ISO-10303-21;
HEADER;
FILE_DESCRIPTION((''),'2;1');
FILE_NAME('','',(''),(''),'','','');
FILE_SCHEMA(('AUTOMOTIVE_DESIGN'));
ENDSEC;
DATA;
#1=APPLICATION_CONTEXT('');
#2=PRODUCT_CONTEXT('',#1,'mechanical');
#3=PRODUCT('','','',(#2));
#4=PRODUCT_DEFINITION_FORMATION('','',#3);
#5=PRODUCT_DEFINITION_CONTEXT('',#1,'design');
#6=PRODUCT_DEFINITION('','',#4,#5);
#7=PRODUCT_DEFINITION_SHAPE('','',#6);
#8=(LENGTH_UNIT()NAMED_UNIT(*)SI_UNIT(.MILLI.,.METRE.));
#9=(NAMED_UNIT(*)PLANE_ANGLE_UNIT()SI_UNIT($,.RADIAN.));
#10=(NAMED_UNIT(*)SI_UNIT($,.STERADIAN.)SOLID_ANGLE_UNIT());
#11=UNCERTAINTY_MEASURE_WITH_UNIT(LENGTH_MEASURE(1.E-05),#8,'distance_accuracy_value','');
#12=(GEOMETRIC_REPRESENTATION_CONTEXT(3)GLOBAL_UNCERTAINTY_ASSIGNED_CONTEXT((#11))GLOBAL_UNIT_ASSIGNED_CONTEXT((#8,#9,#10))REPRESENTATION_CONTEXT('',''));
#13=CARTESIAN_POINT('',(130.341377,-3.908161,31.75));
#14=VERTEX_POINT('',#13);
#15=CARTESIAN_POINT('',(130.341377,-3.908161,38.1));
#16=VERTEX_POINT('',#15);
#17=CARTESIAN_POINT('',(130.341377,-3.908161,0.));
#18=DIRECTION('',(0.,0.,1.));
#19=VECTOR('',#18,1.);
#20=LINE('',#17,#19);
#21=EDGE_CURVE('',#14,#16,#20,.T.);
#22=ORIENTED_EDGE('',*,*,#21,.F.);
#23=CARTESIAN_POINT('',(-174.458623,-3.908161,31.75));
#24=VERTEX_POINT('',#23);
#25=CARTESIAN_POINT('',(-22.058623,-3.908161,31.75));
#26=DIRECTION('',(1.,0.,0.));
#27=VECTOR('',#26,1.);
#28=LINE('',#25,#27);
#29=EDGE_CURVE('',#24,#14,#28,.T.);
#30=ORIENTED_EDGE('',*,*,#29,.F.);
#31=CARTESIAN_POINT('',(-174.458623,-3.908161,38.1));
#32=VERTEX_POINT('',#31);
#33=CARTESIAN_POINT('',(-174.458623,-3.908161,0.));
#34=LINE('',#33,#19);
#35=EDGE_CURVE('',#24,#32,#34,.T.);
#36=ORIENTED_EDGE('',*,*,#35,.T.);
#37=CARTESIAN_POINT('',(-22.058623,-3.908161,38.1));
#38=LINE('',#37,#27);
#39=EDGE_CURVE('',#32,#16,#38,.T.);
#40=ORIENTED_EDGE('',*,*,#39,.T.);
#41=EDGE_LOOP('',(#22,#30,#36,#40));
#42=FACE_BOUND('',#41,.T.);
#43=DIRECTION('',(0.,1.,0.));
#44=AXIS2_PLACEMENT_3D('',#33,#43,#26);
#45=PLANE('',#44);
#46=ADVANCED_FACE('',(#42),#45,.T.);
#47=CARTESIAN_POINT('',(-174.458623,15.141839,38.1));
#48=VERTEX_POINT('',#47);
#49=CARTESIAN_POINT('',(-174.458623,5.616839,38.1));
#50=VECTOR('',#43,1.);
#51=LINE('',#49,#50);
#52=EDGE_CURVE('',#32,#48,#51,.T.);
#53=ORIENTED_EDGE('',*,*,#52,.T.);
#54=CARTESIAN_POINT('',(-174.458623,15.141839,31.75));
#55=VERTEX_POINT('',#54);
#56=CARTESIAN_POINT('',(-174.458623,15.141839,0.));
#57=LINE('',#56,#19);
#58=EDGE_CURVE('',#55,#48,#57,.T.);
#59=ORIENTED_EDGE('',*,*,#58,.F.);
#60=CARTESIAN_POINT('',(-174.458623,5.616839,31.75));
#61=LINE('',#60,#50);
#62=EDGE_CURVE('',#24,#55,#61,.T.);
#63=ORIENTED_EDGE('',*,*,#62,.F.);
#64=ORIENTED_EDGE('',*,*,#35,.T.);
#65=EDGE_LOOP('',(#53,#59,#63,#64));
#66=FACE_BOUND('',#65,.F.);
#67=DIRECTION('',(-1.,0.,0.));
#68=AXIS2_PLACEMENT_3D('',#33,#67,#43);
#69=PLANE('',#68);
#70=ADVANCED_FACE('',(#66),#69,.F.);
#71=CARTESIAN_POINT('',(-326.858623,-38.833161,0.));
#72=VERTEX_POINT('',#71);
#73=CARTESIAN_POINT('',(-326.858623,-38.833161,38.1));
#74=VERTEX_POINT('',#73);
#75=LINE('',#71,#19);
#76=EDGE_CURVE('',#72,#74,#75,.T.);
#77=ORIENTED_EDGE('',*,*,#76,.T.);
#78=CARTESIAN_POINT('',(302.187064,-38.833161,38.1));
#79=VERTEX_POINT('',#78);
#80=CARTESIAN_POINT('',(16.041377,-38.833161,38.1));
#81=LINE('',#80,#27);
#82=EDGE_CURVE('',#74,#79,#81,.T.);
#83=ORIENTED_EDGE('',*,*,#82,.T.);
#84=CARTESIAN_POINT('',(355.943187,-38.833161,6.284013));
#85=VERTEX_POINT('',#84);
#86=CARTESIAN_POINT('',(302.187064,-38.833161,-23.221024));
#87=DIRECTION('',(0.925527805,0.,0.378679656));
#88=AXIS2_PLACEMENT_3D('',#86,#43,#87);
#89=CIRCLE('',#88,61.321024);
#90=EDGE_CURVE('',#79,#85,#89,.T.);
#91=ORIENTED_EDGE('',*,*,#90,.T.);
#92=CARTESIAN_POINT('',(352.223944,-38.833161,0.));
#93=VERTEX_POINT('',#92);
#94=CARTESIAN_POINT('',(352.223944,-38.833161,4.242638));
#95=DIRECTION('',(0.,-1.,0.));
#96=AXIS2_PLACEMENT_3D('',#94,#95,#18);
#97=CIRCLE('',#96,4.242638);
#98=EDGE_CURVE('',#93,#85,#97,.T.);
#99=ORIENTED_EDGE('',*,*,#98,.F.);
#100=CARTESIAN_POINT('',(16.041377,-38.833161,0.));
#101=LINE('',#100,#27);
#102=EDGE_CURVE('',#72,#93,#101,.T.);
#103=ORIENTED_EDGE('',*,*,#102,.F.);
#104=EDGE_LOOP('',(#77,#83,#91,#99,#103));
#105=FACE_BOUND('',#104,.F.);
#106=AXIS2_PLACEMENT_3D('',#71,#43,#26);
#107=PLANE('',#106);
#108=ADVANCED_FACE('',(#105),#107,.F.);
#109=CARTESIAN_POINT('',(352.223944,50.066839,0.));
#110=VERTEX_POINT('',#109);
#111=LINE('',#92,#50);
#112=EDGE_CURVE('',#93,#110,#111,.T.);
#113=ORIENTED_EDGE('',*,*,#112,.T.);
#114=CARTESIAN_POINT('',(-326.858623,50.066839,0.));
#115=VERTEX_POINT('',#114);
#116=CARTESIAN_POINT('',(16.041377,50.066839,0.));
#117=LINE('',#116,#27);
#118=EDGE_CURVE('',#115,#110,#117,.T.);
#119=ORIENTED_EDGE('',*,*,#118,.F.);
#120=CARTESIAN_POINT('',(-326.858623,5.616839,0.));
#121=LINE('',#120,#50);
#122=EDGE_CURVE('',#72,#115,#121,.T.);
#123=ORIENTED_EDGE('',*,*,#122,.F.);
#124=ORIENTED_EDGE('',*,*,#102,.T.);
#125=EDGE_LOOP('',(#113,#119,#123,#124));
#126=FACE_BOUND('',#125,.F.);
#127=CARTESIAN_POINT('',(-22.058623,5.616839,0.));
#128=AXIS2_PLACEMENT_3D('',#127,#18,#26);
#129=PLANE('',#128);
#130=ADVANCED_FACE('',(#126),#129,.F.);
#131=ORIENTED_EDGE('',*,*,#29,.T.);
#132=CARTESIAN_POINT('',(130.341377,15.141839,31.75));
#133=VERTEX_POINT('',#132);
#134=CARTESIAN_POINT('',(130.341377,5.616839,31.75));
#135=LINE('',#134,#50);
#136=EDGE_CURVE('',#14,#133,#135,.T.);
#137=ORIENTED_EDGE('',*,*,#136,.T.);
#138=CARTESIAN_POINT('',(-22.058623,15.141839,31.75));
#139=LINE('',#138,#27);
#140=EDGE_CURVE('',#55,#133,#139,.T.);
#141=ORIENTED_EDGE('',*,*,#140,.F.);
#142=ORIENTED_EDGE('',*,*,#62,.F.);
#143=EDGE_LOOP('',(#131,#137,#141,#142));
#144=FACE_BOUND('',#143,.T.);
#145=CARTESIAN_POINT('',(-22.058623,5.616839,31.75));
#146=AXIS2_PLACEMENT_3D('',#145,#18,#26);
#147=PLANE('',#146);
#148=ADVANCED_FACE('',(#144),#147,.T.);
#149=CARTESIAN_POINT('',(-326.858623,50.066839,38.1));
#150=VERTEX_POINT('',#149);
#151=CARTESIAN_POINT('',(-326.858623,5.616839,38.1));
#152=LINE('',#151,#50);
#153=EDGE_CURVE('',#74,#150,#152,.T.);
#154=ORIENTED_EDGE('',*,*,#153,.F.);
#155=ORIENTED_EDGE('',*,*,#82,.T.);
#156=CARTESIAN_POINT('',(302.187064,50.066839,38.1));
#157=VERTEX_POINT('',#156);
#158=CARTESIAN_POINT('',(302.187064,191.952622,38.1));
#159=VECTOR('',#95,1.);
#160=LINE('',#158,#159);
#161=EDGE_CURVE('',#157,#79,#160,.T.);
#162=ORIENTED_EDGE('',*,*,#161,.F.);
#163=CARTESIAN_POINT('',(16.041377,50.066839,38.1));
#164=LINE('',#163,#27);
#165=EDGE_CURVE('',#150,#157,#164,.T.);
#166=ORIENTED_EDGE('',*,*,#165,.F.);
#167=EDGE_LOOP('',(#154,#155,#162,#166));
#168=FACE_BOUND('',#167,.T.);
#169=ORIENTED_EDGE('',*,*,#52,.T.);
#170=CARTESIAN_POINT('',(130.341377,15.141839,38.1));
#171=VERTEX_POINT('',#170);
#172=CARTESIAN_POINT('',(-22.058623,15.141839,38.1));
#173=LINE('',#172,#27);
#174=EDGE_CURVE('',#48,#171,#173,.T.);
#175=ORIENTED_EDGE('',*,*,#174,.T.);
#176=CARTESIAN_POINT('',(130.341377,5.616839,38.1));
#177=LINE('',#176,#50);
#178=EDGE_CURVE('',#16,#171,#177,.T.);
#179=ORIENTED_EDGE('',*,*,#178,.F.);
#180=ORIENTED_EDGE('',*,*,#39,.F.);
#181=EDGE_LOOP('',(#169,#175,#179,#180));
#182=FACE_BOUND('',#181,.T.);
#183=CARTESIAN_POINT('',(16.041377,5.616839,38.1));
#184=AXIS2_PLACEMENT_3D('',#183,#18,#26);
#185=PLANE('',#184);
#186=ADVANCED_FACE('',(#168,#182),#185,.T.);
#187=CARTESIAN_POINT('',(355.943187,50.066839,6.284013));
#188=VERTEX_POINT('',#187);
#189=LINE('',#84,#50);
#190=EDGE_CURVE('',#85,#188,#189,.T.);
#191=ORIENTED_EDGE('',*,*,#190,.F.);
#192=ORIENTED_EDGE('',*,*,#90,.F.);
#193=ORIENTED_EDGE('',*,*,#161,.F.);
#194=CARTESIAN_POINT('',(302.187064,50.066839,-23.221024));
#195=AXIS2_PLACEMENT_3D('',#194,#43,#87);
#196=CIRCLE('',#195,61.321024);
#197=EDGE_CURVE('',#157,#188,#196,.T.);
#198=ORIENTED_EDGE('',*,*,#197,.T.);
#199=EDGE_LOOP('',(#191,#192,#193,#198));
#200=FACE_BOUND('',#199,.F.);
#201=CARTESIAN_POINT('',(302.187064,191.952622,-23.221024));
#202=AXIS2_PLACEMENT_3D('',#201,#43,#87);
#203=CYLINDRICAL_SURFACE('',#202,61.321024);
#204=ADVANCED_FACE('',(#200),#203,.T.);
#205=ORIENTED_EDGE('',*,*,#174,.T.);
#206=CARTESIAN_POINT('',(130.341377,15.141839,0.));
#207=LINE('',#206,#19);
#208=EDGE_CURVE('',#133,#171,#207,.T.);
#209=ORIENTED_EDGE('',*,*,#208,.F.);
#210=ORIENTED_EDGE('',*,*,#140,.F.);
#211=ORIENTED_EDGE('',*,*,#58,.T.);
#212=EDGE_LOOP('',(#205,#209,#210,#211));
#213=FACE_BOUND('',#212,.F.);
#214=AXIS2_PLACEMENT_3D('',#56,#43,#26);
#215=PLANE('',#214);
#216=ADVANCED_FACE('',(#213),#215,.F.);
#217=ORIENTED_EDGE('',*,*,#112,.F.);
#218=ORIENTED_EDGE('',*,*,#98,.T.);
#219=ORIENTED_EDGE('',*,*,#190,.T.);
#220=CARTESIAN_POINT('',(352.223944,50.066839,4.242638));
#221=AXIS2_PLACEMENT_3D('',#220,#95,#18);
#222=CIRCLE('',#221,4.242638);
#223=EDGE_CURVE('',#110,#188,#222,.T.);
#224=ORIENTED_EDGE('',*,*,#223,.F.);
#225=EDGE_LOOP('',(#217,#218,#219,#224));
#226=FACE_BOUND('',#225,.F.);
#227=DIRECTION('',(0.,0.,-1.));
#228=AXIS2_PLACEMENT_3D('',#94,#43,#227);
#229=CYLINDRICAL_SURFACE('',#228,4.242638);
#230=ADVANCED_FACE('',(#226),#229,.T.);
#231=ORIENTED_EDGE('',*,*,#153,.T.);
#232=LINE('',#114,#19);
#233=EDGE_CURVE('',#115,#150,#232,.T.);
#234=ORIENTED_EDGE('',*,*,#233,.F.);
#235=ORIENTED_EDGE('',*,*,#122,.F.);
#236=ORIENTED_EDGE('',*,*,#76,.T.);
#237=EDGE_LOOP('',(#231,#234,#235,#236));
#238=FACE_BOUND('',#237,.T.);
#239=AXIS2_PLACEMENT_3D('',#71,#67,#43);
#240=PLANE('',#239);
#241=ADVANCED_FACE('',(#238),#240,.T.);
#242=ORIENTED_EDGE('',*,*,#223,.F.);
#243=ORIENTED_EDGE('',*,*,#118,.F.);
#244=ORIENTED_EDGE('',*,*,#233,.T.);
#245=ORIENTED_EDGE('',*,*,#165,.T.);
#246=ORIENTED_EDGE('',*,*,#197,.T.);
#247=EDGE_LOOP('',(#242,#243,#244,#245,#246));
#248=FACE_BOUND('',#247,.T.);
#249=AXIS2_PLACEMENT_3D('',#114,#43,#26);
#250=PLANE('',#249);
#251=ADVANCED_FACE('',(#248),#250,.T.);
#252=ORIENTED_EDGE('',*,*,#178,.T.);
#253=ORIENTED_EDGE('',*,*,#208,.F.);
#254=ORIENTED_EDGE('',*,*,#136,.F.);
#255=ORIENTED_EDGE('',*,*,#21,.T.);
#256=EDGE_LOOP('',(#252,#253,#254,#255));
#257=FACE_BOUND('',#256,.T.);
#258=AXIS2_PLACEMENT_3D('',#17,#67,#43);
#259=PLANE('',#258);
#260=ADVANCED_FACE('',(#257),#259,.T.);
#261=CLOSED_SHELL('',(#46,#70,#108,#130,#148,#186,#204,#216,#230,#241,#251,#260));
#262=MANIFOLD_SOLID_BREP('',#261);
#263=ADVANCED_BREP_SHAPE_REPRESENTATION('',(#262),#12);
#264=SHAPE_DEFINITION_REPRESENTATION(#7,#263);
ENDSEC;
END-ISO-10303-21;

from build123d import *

# Parameters (mm, degrees)
F0_W        = 685.8
F0_H        = 88.9
F0_W_2      = 304.8
F0_H_2      = 19.05
F1_DEPTH    = 38.1
F2_T1_DEPTH = 372.6715659515
F3_R        = 4.2426380505
F4_DEPTH    = 31.75


# Not quite as in the source:
# - a fillet or chamfer that OpenCascade refuses, or shapes differently, is made with other operations: its cross-section is extruded or revolved along the edge and cut away or added


with BuildPart() as f1:
    # F0 (on Top) → F1 (new body)
    with BuildSketch(Plane.XY):
        with Locations((16.0413767457, 5.6168386396)):
            Rectangle(F0_W, F0_H)
        with Locations((-22.0586232543, 5.6168386396)):
            Rectangle(F0_W_2, F0_H_2, mode=Mode.SUBTRACT)
    extrude(amount=F1_DEPTH)

    # F2: fillet of radius 61.3210244843 on 1 edges, made by hand

    # F2_s2 → F2_t1 (cut)
    with BuildSketch(Plane.XZ.offset(-191.9526216153)):
        with BuildLine():
            ThreePointArc((358.9413767457, 0), (336.3654999799, 27.6916706651), (302.1870635554, 38.1))
            Line((302.1870635554, 38.1), (358.9413767457, 38.1))
            Line((358.9413767457, 38.1), (358.9413767457, 0))
        make_face()
    extrude(amount=F2_T1_DEPTH, mode=Mode.SUBTRACT)

    # F3
    f3_edges = [f1.edges().sort_by_distance(p)[0] for p in [
        (358.941377, 5.616839, 0),
    ]]
    fillet(f3_edges, radius=F3_R)

    # F0 (on Top) → F4 (join)
    with BuildSketch(Plane.XY):
        with Locations((-22.0586232543, 5.6168386396)):
            Rectangle(F0_W_2, F0_H_2)
    extrude(amount=F4_DEPTH)


solid = f1.part
